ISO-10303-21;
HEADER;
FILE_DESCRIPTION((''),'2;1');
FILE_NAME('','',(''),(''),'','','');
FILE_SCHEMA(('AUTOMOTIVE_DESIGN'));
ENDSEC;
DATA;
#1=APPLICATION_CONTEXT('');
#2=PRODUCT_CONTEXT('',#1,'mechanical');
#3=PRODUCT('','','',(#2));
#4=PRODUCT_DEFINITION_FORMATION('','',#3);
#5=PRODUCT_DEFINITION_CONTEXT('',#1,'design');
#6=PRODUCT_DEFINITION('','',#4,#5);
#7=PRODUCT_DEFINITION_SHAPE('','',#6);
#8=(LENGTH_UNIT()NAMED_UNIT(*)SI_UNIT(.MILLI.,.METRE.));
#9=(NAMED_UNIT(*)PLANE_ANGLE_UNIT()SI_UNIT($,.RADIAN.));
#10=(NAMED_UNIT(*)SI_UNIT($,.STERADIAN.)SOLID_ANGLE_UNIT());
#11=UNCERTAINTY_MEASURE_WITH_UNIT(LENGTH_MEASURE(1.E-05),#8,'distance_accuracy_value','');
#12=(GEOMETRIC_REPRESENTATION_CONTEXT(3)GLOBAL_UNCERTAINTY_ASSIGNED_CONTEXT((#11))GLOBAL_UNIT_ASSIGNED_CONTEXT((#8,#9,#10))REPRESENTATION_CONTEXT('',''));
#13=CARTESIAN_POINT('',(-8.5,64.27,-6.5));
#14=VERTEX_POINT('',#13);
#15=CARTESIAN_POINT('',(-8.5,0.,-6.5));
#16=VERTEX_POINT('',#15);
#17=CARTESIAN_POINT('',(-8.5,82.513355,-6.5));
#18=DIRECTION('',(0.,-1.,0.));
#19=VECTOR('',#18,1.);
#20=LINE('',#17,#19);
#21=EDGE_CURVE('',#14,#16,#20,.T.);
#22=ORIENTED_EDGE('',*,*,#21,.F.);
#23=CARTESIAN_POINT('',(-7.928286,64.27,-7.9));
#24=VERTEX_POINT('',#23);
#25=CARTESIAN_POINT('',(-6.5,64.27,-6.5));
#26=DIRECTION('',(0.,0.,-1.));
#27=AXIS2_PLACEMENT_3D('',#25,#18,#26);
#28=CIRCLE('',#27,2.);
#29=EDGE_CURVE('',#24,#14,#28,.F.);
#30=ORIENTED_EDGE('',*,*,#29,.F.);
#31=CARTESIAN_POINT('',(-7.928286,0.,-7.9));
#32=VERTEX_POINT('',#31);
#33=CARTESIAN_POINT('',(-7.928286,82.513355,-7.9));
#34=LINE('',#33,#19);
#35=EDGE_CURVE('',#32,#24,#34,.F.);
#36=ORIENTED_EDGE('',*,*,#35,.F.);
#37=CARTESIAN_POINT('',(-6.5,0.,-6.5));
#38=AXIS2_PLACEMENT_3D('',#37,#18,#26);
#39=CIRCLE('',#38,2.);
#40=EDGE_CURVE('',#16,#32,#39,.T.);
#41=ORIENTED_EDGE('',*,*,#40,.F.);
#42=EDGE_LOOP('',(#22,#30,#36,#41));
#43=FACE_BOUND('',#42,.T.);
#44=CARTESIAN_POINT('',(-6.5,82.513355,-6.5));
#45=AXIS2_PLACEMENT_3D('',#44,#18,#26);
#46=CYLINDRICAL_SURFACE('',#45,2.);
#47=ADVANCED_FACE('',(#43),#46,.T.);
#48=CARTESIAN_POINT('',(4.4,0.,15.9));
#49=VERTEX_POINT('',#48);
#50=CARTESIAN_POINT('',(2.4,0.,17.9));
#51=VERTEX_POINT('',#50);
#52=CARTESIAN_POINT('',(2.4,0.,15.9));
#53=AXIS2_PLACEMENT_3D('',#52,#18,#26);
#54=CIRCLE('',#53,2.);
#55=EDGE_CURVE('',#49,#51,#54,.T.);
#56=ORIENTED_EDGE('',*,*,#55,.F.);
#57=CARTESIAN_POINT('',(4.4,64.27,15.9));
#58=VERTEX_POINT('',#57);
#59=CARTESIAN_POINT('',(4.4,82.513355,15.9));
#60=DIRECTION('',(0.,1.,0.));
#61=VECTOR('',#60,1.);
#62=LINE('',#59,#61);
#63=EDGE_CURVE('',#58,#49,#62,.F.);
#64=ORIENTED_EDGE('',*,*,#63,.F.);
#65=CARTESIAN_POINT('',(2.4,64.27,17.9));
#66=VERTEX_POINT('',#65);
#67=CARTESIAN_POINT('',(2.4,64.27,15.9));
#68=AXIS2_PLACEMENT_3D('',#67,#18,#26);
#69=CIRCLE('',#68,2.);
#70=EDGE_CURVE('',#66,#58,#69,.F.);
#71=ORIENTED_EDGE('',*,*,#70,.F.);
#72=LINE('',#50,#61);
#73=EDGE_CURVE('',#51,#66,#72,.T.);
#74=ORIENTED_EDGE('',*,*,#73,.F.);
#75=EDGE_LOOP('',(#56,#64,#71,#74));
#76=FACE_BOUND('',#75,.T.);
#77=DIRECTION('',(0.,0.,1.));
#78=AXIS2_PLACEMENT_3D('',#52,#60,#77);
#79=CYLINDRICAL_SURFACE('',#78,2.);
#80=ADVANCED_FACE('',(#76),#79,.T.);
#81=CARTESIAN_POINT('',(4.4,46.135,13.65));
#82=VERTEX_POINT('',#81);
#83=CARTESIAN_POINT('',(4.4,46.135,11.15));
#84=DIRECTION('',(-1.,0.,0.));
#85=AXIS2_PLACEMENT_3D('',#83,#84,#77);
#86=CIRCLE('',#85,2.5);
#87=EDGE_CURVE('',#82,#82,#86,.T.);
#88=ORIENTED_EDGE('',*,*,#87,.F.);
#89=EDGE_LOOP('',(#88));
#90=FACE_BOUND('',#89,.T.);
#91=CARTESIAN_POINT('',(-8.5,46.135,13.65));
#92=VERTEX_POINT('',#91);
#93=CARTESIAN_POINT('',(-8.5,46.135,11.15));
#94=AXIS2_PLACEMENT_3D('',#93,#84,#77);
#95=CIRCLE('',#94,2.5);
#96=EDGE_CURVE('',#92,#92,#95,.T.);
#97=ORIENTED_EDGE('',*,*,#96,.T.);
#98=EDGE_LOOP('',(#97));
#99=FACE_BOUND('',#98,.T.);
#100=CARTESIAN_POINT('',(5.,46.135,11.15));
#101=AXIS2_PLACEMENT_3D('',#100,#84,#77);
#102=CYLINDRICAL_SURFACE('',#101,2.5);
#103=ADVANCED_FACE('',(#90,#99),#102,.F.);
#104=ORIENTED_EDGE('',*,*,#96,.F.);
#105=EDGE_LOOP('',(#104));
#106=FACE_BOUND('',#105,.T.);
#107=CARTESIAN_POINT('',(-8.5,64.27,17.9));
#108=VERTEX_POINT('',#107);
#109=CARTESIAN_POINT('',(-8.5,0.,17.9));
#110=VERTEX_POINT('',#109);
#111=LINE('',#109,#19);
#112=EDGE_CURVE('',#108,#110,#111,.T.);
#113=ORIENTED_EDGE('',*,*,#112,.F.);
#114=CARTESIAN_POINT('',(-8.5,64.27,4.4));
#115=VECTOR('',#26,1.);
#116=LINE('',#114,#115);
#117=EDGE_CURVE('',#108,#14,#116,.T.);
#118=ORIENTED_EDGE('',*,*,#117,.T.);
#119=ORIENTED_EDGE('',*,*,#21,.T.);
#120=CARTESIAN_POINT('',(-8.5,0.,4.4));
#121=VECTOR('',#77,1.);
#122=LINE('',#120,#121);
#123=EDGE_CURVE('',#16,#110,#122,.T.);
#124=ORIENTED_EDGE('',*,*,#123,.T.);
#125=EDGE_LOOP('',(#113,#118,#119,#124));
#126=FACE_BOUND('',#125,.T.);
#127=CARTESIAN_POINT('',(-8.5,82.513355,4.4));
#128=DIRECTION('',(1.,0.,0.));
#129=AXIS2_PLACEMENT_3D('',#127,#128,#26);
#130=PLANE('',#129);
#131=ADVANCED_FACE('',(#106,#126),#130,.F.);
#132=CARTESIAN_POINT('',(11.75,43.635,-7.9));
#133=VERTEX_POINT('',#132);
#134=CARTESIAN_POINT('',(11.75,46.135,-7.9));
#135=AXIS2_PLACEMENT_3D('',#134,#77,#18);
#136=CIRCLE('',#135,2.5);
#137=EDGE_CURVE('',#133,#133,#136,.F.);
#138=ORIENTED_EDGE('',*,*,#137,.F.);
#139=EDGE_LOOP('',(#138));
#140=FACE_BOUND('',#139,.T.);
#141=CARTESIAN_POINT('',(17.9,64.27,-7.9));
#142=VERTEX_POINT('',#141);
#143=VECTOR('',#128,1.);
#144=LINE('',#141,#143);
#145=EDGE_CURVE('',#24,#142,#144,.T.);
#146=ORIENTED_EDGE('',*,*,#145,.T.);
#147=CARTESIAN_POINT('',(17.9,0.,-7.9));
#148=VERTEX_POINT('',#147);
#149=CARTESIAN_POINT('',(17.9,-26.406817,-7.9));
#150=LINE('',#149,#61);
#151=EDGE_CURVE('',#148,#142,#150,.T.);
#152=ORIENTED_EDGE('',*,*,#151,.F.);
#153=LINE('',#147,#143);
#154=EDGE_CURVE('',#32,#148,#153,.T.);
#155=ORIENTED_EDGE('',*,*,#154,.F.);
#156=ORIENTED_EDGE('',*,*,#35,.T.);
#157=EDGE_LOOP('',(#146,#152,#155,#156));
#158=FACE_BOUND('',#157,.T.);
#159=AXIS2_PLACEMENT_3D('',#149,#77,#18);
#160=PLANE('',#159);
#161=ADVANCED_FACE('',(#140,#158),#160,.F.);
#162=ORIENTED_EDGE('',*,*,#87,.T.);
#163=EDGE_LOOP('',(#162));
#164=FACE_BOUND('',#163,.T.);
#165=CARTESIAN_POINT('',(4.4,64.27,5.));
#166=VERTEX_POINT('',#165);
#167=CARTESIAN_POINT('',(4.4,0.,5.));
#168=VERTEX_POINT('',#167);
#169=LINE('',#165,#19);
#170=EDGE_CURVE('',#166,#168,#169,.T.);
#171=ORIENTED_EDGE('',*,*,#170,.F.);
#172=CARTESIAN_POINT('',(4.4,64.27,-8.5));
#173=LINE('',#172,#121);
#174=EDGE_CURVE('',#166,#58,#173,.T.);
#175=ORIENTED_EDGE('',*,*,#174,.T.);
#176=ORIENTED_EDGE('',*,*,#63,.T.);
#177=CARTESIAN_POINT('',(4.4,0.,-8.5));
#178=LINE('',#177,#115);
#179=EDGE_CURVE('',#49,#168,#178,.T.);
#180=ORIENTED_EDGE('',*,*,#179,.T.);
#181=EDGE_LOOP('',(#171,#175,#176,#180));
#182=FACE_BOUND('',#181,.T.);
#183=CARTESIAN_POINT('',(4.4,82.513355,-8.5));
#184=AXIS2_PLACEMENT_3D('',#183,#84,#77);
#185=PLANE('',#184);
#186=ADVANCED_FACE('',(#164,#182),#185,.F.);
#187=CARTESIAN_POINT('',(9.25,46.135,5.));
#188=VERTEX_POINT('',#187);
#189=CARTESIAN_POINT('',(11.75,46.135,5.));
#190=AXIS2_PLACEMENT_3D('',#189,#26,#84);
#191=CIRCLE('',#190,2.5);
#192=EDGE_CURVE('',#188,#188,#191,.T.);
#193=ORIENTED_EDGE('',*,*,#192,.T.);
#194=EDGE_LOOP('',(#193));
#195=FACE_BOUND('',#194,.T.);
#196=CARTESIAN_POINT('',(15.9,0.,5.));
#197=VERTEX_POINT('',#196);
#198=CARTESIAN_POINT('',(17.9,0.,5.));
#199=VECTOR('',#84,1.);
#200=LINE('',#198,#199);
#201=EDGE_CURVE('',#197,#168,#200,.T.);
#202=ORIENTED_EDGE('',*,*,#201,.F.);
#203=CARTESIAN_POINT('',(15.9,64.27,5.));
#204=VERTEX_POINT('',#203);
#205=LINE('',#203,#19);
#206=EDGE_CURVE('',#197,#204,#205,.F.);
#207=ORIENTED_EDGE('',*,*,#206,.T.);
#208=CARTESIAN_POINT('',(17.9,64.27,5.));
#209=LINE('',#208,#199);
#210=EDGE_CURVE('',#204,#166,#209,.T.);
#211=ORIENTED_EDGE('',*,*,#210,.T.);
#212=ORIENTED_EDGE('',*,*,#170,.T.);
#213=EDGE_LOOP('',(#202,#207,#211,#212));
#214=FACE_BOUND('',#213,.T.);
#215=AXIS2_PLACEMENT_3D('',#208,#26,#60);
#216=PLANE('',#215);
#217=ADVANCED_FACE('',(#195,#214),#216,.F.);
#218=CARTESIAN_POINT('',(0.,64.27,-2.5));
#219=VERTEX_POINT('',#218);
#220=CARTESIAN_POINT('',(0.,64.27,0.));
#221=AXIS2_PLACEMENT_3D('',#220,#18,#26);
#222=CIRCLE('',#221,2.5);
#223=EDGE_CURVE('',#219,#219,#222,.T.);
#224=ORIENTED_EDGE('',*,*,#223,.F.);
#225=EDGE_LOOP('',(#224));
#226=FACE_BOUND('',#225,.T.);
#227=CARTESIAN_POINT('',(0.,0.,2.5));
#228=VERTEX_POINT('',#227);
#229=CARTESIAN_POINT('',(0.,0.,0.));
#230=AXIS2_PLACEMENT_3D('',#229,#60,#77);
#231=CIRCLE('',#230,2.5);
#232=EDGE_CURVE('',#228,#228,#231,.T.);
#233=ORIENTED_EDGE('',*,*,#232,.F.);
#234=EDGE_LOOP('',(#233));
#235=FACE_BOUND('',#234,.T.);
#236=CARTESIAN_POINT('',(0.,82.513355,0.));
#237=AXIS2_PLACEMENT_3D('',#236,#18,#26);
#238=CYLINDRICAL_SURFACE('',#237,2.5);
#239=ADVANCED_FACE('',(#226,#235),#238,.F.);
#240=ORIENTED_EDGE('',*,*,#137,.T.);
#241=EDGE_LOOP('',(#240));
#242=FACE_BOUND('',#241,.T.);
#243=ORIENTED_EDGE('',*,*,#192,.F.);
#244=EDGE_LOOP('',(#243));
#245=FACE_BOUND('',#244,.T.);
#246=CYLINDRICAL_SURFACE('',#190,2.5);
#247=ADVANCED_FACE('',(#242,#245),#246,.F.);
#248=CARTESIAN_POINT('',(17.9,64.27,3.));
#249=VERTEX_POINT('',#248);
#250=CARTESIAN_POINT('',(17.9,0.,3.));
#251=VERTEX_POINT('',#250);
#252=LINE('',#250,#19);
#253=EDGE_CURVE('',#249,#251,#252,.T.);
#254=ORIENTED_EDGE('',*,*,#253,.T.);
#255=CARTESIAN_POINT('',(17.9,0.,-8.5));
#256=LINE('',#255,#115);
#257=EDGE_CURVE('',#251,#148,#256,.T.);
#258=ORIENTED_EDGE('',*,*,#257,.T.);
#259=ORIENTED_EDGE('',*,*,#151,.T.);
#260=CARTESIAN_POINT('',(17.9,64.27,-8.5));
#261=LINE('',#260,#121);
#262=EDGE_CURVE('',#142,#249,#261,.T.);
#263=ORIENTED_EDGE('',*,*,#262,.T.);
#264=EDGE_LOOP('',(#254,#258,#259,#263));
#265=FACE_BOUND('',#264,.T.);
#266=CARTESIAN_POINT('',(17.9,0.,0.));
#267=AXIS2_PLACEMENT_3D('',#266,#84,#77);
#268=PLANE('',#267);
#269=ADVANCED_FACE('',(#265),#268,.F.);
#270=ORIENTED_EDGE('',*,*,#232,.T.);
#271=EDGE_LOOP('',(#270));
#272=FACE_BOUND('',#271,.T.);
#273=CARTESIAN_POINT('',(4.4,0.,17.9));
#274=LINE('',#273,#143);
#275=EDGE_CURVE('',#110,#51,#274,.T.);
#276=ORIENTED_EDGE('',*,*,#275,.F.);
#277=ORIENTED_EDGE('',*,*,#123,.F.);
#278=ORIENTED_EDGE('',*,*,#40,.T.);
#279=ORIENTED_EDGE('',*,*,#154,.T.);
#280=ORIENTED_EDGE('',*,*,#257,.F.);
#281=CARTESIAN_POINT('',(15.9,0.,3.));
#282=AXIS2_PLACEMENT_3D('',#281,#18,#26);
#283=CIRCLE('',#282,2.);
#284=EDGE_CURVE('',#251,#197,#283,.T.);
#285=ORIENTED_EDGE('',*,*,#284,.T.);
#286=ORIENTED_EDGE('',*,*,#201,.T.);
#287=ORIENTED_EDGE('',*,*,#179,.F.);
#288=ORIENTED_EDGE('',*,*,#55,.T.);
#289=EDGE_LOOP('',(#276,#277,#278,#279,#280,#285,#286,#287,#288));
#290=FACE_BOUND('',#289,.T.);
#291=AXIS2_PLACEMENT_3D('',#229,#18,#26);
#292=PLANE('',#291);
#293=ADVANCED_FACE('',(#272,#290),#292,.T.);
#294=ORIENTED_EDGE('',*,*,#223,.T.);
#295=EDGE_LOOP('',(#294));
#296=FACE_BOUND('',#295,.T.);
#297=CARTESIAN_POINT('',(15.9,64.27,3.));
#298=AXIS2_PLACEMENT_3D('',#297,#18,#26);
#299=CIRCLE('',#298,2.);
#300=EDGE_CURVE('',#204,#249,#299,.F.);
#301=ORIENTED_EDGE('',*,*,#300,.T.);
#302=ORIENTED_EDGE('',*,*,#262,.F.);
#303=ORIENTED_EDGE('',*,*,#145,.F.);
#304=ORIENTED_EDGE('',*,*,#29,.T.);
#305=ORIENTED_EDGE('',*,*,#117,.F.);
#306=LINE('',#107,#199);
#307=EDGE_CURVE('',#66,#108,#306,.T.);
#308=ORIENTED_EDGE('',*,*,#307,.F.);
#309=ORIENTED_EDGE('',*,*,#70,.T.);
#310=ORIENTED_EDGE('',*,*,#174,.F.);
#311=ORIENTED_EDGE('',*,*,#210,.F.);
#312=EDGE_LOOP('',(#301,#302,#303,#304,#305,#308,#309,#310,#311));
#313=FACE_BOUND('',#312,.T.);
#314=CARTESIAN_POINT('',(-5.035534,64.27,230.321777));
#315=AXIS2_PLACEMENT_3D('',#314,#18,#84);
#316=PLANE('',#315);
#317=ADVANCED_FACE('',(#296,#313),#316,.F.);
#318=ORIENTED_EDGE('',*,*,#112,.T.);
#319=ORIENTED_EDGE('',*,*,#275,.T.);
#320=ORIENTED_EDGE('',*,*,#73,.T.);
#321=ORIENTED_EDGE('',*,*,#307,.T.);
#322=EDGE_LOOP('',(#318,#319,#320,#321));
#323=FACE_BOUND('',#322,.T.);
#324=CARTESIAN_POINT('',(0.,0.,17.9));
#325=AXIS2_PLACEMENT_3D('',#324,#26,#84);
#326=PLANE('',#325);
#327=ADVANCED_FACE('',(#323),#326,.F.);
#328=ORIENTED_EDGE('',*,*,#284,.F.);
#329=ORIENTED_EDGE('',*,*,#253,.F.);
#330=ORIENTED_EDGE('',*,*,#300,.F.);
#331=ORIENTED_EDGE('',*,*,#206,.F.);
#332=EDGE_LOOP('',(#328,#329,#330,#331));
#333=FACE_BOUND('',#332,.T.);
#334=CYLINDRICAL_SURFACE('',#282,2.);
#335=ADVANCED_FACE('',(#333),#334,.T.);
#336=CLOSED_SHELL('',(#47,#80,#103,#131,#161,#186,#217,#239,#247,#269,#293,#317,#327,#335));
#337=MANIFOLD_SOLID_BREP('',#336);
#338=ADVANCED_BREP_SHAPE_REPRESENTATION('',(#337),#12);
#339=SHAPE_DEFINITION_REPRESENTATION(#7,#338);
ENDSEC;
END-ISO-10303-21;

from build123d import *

# Parameters (mm, degrees)
HOLE_TOPMAIN_OUTLINE_W = 12.9
HOLE_TOPMAIN_OUTLINE_H = 12.9
HOLE_TOPMAIN_OUTLINE_R = 2.5
HOLE_TOPMAIN_DEPTH     = 64.27
SKETCH14_R             = 2.5
CUT_EXTRUDE9_DEPTH     = 67.100627077
SKETCH15_R             = 3.25
CUT_EXTRUDE10_DEPTH    = 66.309210028
SKETCH18_W             = 12.9
SKETCH18_H             = 64.27
SKETCH18_R             = 3.25
BOSS_EXTRUDE2_DEPTH    = 13.5
FILLET3_R              = 2
SKETCH19_R             = 2.5
CUT_EXTRUDE11_DEPTH    = 13.5
SKETCH22_W             = 13.5
SKETCH22_H             = 64.27
BOSS_EXTRUDE3_DEPTH    = 13.5
BOSS_EXTRUDE5_START    = -26.4
SKETCH24_R             = 3.25
BOSS_EXTRUDE5_DEPTH    = 26.4
CUT_EXTRUDE12_START    = -64.27
SKETCH25_R             = 2.5
CUT_EXTRUDE12_DEPTH    = 64.27
SKETCH26_R             = 2.5
CUT_EXTRUDE13_DEPTH    = 13.5
SKETCH28_R             = 2.5
CUT_EXTRUDE14_DEPTH    = 13.5
FILLET4_R              = 2
SKETCH31_W             = 26.4
SKETCH31_H             = 0.6
CUT_EXTRUDE15_DEPTH    = 64.27


# Read off the part's stored shape, not the designer's step: hole-TopMain
with BuildPart() as part:
    # hole-TopMain outline → hole-TopMain (new body)
    with BuildSketch(Plane(origin=(0, 0, 0), x_dir=(1, 0, 0), z_dir=(0, 1, 0))):
        with Locations((-2.05, 2.05)):
            Rectangle(HOLE_TOPMAIN_OUTLINE_W, HOLE_TOPMAIN_OUTLINE_H)
        Circle(HOLE_TOPMAIN_OUTLINE_R, mode=Mode.SUBTRACT)
    extrude(amount=HOLE_TOPMAIN_DEPTH)

    # Sketch14 → Cut-Extrude9 (cut, through all)
    with BuildSketch(Plane(origin=(0, 0, -8.5), x_dir=(-1, 0, 0), z_dir=(0, 0, -1))):
        with Locations((1.75, 46.135)):
            Circle(SKETCH14_R)
    extrude(amount=-CUT_EXTRUDE9_DEPTH, mode=Mode.SUBTRACT)

    # Sketch15 → Cut-Extrude10 (cut, through all)
    with BuildSketch(Plane(origin=(0, 0, -3.5), x_dir=(-1, 0, 0), z_dir=(0, 0, -1))):
        with Locations((1.75, 46.135)):
            Circle(SKETCH15_R)
    extrude(amount=-CUT_EXTRUDE10_DEPTH, mode=Mode.SUBTRACT)

    # Sketch18 → Boss-Extrude2 (add)
    with BuildSketch(Plane.XY.offset(4.4)):
        with Locations((-2.05, 32.135)):
            Rectangle(SKETCH18_W, SKETCH18_H)
        with Locations(Location((-1.75, 46.135, 0), (0, 0, 180))):
            Circle(SKETCH18_R, mode=Mode.SUBTRACT)
    extrude(amount=BOSS_EXTRUDE2_DEPTH)

    # Fillet3
    fillet3_edges = [part.edges().sort_by_distance(p)[0] for p in [
        (-8.5, 32.135, -8.5),
        (4.4, 32.135, 17.9),
    ]]
    fillet(fillet3_edges, radius=FILLET3_R)

    # Sketch19 → Cut-Extrude11 (cut)
    with BuildSketch(Plane.ZY.offset(8.5)):
        with Locations((11.15, 46.135)):
            Circle(SKETCH19_R)
    extrude(amount=-CUT_EXTRUDE11_DEPTH, mode=Mode.SUBTRACT)

    # Sketch22 → Boss-Extrude3 (add)
    with BuildSketch(Plane(origin=(4.4, 0, 0), x_dir=(0, 0, -1), z_dir=(1, 0, 0))):
        with Locations((1.75, 32.135)):
            Rectangle(SKETCH22_W, SKETCH22_H)
    extrude(amount=BOSS_EXTRUDE3_DEPTH)

    # Sketch24 → Boss-Extrude5 (add)
    with BuildSketch(Plane.XY.offset(17.9).offset(BOSS_EXTRUDE5_START)):
        with Locations((-1.75, 46.135)):
            Circle(SKETCH24_R)
    extrude(amount=BOSS_EXTRUDE5_DEPTH)

    # Sketch25 → Cut-Extrude12 (cut)
    with BuildSketch(Plane(origin=(0, 64.27, 0), x_dir=(1, 0, 0), z_dir=(0, 1, 0)).offset(CUT_EXTRUDE12_START)):
        with Locations(Location((0, 0, 0), (0, 0, 90))):
            Circle(SKETCH25_R)
    extrude(amount=CUT_EXTRUDE12_DEPTH, mode=Mode.SUBTRACT)

    # Sketch26 → Cut-Extrude13 (cut)
    with BuildSketch(Plane.ZY.offset(8.5)):
        with Locations((11.15, 46.135)):
            Circle(SKETCH26_R)
    extrude(amount=-CUT_EXTRUDE13_DEPTH, mode=Mode.SUBTRACT)

    # Sketch28 → Cut-Extrude14 (cut)
    with BuildSketch(Plane(origin=(0, 0, -8.5), x_dir=(-1, 0, 0), z_dir=(0, 0, -1))):
        with Locations((-11.75, 46.135)):
            Circle(SKETCH28_R)
    extrude(amount=-CUT_EXTRUDE14_DEPTH, mode=Mode.SUBTRACT)

    # Fillet4
    fillet4_edges = [part.edges().sort_by_distance(p)[0] for p in [
        (17.9, 32.135, 5),
    ]]
    fillet(fillet4_edges, radius=FILLET4_R)

    # Sketch31 → Cut-Extrude15 (cut)
    with BuildSketch(Plane(origin=(0, 64.27, 0), x_dir=(1, 0, 0), z_dir=(0, 1, 0))):
        with Locations((4.7, 8.2)):
            Rectangle(SKETCH31_W, SKETCH31_H)
    extrude(amount=-CUT_EXTRUDE15_DEPTH, mode=Mode.SUBTRACT)


solid = part.part
